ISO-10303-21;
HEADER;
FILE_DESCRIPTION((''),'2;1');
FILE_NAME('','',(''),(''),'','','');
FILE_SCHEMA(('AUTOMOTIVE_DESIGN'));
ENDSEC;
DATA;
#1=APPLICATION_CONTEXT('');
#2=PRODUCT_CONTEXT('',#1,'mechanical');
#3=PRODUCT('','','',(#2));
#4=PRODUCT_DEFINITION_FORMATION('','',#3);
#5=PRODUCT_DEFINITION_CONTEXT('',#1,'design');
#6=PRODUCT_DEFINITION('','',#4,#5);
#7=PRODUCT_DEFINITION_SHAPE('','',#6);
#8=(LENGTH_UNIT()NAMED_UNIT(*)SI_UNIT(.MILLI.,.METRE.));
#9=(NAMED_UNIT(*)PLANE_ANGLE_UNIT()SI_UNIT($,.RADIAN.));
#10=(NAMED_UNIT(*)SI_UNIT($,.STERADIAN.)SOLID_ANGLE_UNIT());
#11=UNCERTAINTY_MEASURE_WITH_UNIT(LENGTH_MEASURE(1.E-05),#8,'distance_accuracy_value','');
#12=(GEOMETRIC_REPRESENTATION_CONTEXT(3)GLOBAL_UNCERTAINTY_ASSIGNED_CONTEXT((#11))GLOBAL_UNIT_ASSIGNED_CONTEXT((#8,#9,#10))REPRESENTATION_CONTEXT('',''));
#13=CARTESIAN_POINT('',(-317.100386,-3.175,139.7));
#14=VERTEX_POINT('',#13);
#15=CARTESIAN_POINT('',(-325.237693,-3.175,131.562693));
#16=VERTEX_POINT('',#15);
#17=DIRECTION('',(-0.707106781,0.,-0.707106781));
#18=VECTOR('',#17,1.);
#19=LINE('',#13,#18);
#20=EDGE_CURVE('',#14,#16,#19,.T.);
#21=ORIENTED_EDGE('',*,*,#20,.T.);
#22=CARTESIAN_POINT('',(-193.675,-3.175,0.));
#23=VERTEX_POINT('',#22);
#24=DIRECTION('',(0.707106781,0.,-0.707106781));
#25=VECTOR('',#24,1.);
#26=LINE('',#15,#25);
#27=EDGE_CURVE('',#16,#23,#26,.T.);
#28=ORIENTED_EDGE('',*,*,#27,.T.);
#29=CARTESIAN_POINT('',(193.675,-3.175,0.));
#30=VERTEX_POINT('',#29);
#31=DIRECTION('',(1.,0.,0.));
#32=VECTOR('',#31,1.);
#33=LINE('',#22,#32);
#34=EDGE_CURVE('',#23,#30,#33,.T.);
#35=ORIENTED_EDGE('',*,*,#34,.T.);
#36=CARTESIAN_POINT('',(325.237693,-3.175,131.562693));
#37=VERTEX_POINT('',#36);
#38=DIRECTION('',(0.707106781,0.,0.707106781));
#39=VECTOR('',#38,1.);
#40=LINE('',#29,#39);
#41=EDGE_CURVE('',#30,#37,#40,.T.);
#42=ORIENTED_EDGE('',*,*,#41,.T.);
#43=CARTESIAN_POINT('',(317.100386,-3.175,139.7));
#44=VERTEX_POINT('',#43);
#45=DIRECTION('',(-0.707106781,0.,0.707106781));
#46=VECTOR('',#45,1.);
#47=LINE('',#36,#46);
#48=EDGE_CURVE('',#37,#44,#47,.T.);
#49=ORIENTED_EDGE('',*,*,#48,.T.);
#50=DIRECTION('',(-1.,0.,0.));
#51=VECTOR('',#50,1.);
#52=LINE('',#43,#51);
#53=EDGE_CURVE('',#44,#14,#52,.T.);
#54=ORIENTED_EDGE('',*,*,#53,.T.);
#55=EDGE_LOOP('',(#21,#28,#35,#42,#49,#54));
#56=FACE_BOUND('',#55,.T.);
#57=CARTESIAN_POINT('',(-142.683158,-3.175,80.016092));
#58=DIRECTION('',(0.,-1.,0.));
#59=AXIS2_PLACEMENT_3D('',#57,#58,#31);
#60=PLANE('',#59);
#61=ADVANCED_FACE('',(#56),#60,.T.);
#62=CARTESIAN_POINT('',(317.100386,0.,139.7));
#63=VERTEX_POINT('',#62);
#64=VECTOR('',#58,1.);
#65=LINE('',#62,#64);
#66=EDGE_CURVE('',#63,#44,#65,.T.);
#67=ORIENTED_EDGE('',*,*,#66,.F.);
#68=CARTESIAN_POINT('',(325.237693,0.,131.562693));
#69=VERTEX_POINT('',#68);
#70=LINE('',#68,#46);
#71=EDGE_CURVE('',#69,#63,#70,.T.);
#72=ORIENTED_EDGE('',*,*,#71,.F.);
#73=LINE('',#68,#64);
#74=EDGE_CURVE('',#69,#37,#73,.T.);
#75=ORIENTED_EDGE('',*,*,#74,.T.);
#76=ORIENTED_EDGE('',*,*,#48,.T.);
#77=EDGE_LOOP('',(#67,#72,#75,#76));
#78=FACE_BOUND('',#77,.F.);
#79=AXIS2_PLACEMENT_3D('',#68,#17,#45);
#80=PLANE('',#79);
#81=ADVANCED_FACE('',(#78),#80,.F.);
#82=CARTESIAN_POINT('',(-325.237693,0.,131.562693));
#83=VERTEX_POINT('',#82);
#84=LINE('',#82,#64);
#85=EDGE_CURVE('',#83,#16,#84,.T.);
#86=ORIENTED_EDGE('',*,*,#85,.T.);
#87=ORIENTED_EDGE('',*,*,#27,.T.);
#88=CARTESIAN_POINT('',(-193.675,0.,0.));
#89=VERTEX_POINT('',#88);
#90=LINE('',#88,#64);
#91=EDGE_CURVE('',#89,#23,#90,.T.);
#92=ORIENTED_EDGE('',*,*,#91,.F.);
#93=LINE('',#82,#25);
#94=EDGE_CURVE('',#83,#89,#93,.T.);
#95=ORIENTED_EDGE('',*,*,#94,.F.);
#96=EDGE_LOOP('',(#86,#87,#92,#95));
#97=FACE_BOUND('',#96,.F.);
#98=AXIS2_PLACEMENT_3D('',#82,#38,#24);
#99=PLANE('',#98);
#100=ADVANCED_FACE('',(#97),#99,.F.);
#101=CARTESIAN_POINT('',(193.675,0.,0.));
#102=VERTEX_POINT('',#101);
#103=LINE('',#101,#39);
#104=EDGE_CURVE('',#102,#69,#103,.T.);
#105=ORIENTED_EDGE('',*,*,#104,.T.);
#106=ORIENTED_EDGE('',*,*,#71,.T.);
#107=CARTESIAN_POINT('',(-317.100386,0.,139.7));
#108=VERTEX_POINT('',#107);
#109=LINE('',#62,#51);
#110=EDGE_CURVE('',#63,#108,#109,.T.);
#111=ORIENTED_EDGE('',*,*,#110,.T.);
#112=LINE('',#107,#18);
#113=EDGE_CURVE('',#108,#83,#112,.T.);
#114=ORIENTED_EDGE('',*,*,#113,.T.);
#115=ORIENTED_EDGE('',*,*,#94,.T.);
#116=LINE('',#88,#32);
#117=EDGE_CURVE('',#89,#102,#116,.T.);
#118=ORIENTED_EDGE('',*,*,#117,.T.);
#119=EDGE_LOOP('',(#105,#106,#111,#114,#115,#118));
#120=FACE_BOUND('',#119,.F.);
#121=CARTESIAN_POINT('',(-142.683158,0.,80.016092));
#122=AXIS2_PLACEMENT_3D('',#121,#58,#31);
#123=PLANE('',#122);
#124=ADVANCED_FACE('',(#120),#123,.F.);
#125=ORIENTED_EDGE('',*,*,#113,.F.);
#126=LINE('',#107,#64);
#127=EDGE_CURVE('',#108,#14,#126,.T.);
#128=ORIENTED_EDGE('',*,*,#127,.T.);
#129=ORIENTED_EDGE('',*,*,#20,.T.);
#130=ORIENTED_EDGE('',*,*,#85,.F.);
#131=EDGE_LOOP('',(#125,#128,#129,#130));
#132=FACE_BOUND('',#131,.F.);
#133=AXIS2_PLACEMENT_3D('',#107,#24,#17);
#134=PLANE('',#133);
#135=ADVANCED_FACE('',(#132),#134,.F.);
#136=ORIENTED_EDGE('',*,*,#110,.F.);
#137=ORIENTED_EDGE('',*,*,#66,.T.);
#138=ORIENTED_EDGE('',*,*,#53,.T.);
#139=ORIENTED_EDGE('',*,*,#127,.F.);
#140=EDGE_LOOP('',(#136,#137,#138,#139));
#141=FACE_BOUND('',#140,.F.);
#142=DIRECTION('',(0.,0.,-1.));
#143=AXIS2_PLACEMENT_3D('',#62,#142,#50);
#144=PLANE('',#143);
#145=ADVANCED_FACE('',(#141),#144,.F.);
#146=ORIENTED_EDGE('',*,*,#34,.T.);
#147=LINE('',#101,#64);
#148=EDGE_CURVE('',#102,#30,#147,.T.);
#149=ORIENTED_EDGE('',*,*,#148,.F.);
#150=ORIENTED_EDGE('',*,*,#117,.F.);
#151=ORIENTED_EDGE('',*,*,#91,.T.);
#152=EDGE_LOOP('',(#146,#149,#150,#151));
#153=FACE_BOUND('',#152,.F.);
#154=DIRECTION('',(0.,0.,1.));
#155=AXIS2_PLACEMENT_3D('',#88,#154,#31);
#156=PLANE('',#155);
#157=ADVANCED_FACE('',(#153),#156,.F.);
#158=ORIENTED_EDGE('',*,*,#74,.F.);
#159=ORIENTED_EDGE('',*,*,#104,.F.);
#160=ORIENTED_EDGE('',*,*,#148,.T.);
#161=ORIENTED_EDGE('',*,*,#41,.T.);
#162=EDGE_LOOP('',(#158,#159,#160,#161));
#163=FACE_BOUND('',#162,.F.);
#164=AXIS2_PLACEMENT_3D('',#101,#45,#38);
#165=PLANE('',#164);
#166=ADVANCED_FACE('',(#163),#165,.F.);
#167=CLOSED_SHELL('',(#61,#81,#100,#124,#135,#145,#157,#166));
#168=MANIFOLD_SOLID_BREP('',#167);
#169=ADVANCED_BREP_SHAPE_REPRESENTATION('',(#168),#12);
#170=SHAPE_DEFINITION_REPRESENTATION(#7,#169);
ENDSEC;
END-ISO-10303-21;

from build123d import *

# Parameters (mm, degrees)
F1_DEPTH = 3.175


# Not quite as in the source:
# - a length typed as a fraction of an inch, garbled in the dataset ("3 / 203.2 mm" for 3/8 in), is restored


with BuildPart() as f1:
    # F0 (on Front) → F1 (new body)
    with BuildSketch(Plane.XZ):
        Polygon((-193.675, 0), (0, 0), (0, 139.7), (-317.1003863096, 139.7), (-325.2376931548, 131.5626931548), align=None)
        Polygon((0, 139.7), (0, 0), (193.675, 0), (325.2376931548, 131.5626931548), (317.1003863096, 139.7), align=None)
    extrude(amount=F1_DEPTH)


solid = f1.part
